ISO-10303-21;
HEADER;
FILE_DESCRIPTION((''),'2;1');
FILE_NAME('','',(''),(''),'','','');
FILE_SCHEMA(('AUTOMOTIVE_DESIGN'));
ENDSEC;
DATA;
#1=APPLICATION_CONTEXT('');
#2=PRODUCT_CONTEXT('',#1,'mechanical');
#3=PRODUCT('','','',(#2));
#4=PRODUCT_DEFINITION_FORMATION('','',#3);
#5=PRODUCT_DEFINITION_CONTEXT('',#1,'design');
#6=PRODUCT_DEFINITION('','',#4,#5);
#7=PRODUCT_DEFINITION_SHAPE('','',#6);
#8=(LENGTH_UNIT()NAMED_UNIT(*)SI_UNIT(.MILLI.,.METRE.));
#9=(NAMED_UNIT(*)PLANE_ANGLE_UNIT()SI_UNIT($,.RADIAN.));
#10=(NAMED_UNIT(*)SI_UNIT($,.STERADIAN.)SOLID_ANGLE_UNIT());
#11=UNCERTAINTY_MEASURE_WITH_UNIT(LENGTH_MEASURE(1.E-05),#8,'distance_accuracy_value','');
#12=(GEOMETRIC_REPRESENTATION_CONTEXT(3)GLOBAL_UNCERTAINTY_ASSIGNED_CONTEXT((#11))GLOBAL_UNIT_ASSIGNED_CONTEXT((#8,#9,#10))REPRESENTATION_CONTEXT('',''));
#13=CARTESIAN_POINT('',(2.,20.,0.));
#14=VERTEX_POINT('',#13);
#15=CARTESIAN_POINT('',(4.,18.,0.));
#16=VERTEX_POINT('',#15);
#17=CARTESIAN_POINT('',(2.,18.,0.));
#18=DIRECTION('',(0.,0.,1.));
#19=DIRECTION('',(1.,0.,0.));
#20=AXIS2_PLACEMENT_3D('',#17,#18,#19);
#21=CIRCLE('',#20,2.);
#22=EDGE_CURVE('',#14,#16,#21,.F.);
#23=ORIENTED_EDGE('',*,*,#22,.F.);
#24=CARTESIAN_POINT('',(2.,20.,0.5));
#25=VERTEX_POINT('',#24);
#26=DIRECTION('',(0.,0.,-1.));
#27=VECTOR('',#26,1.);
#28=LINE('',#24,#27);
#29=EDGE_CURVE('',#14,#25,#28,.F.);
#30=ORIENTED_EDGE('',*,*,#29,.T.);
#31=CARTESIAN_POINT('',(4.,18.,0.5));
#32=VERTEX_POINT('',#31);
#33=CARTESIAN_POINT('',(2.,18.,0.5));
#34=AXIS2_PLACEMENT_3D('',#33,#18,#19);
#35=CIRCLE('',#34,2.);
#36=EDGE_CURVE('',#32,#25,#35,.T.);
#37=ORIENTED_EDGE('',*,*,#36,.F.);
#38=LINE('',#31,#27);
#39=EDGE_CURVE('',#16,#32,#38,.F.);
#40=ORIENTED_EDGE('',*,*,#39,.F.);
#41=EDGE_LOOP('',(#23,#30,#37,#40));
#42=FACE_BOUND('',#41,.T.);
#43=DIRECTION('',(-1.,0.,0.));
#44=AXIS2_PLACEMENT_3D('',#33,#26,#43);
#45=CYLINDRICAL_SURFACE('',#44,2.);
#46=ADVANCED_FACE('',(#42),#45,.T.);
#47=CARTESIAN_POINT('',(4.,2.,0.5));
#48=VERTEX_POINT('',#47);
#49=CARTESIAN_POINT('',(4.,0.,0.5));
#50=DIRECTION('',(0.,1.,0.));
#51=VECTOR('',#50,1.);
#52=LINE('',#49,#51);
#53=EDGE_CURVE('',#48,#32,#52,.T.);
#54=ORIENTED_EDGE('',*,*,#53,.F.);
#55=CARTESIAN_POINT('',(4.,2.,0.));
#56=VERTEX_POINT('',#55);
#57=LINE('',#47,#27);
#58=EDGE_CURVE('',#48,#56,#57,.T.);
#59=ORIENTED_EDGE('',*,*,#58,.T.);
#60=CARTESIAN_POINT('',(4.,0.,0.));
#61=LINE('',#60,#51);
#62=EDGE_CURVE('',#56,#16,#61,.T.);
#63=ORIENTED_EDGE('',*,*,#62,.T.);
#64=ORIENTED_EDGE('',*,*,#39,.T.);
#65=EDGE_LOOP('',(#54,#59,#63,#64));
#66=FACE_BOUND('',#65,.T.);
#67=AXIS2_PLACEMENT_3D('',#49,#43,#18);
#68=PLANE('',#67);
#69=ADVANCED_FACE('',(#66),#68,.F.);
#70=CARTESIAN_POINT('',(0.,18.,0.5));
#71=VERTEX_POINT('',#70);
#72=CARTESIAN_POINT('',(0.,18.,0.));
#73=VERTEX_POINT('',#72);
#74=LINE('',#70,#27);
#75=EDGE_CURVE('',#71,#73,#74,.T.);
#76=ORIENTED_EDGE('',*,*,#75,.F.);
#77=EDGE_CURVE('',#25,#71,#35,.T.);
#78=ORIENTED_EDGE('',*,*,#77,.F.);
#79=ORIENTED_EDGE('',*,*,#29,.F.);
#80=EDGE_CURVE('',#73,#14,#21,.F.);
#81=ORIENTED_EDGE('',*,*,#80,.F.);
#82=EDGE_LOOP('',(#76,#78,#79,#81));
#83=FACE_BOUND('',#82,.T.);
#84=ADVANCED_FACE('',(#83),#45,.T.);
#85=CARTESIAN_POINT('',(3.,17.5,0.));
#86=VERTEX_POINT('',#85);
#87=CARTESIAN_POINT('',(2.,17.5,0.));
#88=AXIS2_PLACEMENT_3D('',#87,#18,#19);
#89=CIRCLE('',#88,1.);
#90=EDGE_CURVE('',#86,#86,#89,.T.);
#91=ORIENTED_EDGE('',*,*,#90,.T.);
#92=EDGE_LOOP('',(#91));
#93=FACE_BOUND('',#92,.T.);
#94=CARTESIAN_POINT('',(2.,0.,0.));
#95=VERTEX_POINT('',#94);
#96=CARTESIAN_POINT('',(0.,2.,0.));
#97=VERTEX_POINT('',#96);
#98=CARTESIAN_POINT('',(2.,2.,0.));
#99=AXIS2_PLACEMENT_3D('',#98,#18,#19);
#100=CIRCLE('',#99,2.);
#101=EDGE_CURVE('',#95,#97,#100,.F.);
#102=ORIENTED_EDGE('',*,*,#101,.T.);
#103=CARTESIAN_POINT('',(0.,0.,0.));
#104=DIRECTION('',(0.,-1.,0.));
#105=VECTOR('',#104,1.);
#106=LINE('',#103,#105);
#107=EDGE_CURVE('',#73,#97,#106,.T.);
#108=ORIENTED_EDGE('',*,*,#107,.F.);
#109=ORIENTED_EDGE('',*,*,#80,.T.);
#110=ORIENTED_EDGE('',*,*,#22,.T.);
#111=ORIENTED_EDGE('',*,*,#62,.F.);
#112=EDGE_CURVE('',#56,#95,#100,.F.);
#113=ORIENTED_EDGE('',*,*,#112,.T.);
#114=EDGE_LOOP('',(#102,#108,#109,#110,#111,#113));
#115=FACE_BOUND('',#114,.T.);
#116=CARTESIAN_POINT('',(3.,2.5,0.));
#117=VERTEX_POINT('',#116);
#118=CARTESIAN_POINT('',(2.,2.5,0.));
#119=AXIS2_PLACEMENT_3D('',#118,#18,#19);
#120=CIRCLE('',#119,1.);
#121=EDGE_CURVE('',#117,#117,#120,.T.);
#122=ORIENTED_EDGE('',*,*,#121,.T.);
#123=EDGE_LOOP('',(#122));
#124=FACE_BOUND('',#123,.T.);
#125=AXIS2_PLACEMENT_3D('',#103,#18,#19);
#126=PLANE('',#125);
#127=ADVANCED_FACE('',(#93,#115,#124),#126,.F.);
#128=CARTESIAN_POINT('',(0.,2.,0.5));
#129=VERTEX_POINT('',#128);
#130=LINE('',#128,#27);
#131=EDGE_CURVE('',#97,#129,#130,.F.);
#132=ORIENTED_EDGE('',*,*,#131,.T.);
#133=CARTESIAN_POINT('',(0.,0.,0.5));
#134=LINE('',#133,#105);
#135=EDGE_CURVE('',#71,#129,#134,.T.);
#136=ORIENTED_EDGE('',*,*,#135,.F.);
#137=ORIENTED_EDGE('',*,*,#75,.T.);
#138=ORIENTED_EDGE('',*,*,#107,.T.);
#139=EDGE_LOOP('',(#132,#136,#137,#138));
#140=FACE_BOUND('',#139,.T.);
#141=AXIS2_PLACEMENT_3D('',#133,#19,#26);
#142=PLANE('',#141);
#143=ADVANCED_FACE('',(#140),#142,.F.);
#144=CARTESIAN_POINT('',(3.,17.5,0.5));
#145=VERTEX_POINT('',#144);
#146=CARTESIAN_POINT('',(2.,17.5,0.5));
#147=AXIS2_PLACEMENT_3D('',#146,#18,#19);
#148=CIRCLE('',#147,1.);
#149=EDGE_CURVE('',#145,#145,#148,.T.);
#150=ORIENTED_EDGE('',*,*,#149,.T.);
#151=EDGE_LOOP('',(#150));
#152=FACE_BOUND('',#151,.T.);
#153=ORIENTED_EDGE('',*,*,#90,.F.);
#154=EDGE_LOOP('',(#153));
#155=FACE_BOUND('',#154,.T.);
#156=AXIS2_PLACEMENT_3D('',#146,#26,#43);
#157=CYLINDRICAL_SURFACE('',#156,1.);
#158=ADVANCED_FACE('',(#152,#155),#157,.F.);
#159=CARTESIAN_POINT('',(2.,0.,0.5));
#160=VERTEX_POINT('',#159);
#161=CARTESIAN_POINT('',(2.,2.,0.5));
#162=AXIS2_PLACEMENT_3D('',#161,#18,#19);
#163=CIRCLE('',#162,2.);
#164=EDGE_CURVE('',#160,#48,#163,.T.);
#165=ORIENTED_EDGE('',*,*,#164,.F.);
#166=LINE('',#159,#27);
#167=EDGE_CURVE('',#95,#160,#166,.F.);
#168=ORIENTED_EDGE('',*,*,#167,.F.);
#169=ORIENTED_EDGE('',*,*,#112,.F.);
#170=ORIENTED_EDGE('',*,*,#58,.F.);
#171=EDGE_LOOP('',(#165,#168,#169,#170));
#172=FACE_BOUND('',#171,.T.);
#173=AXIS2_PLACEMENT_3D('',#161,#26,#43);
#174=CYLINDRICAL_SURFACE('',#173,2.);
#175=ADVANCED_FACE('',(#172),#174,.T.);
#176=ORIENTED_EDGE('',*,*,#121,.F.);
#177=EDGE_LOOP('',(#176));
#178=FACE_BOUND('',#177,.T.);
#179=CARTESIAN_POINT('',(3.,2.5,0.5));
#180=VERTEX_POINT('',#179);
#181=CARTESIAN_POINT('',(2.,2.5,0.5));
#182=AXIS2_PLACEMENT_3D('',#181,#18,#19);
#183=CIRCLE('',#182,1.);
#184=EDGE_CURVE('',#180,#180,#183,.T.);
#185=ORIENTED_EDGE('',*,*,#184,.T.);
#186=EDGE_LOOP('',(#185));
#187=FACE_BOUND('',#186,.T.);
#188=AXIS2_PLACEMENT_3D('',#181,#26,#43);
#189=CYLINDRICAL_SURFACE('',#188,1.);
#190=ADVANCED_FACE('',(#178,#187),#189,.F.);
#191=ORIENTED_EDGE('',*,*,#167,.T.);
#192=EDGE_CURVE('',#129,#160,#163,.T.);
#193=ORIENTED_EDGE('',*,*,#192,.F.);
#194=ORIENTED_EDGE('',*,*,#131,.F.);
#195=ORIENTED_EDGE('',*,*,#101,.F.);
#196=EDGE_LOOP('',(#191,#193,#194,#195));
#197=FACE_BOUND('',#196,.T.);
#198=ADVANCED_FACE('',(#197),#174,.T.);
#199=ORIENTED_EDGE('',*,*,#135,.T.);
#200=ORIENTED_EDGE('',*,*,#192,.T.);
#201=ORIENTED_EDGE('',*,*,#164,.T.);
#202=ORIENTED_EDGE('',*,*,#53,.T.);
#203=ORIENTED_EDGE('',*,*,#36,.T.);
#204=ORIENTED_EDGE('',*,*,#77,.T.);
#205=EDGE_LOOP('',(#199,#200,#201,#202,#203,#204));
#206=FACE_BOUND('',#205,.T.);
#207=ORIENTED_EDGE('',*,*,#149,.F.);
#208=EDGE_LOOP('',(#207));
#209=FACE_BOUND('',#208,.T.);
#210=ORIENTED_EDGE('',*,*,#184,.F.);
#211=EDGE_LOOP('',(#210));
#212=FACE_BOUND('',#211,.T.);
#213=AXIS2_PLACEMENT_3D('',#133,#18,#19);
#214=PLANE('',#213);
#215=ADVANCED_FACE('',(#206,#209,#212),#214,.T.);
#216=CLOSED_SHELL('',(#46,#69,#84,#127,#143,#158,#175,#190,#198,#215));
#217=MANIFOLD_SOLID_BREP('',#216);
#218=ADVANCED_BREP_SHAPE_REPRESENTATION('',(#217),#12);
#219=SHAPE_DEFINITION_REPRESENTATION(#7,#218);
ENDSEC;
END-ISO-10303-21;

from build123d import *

# Parameters (mm, degrees)
SKETCH1_W           = 4
SKETCH1_H           = 20
SKETCH1_R           = 1
BOSS_EXTRUDE1_DEPTH = 0.5
FILLET1_R           = 2
FILLET2_R           = 2
FILLET3_R           = 2
FILLET4_R           = 2


with BuildPart() as part:
    # Sketch1 → Boss-Extrude1 (new body)
    with BuildSketch(Plane.XY):
        with Locations((2, 10)):
            Rectangle(SKETCH1_W, SKETCH1_H)
        with Locations((2, 17.5)):
            Circle(SKETCH1_R, mode=Mode.SUBTRACT)
        with Locations((2, 2.5)):
            Circle(SKETCH1_R, mode=Mode.SUBTRACT)
    extrude(amount=BOSS_EXTRUDE1_DEPTH)

    # Fillet1
    fillet1_edges = [part.edges().sort_by_distance(p)[0] for p in [
        (4, 0, 0.25),
    ]]
    fillet(fillet1_edges, radius=FILLET1_R)

    # Fillet2
    fillet2_edges = [part.edges().sort_by_distance(p)[0] for p in [
        (0, 0, 0.25),
    ]]
    fillet(fillet2_edges, radius=FILLET2_R - 0.0001)  # a hair under: the kernel refuses the full size

    # Fillet3
    fillet3_edges = [part.edges().sort_by_distance(p)[0] for p in [
        (0, 20, 0.25),
    ]]
    fillet(fillet3_edges, radius=FILLET3_R)

    # Fillet4
    fillet4_edges = [part.edges().sort_by_distance(p)[0] for p in [
        (4, 20, 0.25),
    ]]
    fillet(fillet4_edges, radius=FILLET4_R - 0.0001)  # a hair under: the kernel refuses the full size


solid = part.part
